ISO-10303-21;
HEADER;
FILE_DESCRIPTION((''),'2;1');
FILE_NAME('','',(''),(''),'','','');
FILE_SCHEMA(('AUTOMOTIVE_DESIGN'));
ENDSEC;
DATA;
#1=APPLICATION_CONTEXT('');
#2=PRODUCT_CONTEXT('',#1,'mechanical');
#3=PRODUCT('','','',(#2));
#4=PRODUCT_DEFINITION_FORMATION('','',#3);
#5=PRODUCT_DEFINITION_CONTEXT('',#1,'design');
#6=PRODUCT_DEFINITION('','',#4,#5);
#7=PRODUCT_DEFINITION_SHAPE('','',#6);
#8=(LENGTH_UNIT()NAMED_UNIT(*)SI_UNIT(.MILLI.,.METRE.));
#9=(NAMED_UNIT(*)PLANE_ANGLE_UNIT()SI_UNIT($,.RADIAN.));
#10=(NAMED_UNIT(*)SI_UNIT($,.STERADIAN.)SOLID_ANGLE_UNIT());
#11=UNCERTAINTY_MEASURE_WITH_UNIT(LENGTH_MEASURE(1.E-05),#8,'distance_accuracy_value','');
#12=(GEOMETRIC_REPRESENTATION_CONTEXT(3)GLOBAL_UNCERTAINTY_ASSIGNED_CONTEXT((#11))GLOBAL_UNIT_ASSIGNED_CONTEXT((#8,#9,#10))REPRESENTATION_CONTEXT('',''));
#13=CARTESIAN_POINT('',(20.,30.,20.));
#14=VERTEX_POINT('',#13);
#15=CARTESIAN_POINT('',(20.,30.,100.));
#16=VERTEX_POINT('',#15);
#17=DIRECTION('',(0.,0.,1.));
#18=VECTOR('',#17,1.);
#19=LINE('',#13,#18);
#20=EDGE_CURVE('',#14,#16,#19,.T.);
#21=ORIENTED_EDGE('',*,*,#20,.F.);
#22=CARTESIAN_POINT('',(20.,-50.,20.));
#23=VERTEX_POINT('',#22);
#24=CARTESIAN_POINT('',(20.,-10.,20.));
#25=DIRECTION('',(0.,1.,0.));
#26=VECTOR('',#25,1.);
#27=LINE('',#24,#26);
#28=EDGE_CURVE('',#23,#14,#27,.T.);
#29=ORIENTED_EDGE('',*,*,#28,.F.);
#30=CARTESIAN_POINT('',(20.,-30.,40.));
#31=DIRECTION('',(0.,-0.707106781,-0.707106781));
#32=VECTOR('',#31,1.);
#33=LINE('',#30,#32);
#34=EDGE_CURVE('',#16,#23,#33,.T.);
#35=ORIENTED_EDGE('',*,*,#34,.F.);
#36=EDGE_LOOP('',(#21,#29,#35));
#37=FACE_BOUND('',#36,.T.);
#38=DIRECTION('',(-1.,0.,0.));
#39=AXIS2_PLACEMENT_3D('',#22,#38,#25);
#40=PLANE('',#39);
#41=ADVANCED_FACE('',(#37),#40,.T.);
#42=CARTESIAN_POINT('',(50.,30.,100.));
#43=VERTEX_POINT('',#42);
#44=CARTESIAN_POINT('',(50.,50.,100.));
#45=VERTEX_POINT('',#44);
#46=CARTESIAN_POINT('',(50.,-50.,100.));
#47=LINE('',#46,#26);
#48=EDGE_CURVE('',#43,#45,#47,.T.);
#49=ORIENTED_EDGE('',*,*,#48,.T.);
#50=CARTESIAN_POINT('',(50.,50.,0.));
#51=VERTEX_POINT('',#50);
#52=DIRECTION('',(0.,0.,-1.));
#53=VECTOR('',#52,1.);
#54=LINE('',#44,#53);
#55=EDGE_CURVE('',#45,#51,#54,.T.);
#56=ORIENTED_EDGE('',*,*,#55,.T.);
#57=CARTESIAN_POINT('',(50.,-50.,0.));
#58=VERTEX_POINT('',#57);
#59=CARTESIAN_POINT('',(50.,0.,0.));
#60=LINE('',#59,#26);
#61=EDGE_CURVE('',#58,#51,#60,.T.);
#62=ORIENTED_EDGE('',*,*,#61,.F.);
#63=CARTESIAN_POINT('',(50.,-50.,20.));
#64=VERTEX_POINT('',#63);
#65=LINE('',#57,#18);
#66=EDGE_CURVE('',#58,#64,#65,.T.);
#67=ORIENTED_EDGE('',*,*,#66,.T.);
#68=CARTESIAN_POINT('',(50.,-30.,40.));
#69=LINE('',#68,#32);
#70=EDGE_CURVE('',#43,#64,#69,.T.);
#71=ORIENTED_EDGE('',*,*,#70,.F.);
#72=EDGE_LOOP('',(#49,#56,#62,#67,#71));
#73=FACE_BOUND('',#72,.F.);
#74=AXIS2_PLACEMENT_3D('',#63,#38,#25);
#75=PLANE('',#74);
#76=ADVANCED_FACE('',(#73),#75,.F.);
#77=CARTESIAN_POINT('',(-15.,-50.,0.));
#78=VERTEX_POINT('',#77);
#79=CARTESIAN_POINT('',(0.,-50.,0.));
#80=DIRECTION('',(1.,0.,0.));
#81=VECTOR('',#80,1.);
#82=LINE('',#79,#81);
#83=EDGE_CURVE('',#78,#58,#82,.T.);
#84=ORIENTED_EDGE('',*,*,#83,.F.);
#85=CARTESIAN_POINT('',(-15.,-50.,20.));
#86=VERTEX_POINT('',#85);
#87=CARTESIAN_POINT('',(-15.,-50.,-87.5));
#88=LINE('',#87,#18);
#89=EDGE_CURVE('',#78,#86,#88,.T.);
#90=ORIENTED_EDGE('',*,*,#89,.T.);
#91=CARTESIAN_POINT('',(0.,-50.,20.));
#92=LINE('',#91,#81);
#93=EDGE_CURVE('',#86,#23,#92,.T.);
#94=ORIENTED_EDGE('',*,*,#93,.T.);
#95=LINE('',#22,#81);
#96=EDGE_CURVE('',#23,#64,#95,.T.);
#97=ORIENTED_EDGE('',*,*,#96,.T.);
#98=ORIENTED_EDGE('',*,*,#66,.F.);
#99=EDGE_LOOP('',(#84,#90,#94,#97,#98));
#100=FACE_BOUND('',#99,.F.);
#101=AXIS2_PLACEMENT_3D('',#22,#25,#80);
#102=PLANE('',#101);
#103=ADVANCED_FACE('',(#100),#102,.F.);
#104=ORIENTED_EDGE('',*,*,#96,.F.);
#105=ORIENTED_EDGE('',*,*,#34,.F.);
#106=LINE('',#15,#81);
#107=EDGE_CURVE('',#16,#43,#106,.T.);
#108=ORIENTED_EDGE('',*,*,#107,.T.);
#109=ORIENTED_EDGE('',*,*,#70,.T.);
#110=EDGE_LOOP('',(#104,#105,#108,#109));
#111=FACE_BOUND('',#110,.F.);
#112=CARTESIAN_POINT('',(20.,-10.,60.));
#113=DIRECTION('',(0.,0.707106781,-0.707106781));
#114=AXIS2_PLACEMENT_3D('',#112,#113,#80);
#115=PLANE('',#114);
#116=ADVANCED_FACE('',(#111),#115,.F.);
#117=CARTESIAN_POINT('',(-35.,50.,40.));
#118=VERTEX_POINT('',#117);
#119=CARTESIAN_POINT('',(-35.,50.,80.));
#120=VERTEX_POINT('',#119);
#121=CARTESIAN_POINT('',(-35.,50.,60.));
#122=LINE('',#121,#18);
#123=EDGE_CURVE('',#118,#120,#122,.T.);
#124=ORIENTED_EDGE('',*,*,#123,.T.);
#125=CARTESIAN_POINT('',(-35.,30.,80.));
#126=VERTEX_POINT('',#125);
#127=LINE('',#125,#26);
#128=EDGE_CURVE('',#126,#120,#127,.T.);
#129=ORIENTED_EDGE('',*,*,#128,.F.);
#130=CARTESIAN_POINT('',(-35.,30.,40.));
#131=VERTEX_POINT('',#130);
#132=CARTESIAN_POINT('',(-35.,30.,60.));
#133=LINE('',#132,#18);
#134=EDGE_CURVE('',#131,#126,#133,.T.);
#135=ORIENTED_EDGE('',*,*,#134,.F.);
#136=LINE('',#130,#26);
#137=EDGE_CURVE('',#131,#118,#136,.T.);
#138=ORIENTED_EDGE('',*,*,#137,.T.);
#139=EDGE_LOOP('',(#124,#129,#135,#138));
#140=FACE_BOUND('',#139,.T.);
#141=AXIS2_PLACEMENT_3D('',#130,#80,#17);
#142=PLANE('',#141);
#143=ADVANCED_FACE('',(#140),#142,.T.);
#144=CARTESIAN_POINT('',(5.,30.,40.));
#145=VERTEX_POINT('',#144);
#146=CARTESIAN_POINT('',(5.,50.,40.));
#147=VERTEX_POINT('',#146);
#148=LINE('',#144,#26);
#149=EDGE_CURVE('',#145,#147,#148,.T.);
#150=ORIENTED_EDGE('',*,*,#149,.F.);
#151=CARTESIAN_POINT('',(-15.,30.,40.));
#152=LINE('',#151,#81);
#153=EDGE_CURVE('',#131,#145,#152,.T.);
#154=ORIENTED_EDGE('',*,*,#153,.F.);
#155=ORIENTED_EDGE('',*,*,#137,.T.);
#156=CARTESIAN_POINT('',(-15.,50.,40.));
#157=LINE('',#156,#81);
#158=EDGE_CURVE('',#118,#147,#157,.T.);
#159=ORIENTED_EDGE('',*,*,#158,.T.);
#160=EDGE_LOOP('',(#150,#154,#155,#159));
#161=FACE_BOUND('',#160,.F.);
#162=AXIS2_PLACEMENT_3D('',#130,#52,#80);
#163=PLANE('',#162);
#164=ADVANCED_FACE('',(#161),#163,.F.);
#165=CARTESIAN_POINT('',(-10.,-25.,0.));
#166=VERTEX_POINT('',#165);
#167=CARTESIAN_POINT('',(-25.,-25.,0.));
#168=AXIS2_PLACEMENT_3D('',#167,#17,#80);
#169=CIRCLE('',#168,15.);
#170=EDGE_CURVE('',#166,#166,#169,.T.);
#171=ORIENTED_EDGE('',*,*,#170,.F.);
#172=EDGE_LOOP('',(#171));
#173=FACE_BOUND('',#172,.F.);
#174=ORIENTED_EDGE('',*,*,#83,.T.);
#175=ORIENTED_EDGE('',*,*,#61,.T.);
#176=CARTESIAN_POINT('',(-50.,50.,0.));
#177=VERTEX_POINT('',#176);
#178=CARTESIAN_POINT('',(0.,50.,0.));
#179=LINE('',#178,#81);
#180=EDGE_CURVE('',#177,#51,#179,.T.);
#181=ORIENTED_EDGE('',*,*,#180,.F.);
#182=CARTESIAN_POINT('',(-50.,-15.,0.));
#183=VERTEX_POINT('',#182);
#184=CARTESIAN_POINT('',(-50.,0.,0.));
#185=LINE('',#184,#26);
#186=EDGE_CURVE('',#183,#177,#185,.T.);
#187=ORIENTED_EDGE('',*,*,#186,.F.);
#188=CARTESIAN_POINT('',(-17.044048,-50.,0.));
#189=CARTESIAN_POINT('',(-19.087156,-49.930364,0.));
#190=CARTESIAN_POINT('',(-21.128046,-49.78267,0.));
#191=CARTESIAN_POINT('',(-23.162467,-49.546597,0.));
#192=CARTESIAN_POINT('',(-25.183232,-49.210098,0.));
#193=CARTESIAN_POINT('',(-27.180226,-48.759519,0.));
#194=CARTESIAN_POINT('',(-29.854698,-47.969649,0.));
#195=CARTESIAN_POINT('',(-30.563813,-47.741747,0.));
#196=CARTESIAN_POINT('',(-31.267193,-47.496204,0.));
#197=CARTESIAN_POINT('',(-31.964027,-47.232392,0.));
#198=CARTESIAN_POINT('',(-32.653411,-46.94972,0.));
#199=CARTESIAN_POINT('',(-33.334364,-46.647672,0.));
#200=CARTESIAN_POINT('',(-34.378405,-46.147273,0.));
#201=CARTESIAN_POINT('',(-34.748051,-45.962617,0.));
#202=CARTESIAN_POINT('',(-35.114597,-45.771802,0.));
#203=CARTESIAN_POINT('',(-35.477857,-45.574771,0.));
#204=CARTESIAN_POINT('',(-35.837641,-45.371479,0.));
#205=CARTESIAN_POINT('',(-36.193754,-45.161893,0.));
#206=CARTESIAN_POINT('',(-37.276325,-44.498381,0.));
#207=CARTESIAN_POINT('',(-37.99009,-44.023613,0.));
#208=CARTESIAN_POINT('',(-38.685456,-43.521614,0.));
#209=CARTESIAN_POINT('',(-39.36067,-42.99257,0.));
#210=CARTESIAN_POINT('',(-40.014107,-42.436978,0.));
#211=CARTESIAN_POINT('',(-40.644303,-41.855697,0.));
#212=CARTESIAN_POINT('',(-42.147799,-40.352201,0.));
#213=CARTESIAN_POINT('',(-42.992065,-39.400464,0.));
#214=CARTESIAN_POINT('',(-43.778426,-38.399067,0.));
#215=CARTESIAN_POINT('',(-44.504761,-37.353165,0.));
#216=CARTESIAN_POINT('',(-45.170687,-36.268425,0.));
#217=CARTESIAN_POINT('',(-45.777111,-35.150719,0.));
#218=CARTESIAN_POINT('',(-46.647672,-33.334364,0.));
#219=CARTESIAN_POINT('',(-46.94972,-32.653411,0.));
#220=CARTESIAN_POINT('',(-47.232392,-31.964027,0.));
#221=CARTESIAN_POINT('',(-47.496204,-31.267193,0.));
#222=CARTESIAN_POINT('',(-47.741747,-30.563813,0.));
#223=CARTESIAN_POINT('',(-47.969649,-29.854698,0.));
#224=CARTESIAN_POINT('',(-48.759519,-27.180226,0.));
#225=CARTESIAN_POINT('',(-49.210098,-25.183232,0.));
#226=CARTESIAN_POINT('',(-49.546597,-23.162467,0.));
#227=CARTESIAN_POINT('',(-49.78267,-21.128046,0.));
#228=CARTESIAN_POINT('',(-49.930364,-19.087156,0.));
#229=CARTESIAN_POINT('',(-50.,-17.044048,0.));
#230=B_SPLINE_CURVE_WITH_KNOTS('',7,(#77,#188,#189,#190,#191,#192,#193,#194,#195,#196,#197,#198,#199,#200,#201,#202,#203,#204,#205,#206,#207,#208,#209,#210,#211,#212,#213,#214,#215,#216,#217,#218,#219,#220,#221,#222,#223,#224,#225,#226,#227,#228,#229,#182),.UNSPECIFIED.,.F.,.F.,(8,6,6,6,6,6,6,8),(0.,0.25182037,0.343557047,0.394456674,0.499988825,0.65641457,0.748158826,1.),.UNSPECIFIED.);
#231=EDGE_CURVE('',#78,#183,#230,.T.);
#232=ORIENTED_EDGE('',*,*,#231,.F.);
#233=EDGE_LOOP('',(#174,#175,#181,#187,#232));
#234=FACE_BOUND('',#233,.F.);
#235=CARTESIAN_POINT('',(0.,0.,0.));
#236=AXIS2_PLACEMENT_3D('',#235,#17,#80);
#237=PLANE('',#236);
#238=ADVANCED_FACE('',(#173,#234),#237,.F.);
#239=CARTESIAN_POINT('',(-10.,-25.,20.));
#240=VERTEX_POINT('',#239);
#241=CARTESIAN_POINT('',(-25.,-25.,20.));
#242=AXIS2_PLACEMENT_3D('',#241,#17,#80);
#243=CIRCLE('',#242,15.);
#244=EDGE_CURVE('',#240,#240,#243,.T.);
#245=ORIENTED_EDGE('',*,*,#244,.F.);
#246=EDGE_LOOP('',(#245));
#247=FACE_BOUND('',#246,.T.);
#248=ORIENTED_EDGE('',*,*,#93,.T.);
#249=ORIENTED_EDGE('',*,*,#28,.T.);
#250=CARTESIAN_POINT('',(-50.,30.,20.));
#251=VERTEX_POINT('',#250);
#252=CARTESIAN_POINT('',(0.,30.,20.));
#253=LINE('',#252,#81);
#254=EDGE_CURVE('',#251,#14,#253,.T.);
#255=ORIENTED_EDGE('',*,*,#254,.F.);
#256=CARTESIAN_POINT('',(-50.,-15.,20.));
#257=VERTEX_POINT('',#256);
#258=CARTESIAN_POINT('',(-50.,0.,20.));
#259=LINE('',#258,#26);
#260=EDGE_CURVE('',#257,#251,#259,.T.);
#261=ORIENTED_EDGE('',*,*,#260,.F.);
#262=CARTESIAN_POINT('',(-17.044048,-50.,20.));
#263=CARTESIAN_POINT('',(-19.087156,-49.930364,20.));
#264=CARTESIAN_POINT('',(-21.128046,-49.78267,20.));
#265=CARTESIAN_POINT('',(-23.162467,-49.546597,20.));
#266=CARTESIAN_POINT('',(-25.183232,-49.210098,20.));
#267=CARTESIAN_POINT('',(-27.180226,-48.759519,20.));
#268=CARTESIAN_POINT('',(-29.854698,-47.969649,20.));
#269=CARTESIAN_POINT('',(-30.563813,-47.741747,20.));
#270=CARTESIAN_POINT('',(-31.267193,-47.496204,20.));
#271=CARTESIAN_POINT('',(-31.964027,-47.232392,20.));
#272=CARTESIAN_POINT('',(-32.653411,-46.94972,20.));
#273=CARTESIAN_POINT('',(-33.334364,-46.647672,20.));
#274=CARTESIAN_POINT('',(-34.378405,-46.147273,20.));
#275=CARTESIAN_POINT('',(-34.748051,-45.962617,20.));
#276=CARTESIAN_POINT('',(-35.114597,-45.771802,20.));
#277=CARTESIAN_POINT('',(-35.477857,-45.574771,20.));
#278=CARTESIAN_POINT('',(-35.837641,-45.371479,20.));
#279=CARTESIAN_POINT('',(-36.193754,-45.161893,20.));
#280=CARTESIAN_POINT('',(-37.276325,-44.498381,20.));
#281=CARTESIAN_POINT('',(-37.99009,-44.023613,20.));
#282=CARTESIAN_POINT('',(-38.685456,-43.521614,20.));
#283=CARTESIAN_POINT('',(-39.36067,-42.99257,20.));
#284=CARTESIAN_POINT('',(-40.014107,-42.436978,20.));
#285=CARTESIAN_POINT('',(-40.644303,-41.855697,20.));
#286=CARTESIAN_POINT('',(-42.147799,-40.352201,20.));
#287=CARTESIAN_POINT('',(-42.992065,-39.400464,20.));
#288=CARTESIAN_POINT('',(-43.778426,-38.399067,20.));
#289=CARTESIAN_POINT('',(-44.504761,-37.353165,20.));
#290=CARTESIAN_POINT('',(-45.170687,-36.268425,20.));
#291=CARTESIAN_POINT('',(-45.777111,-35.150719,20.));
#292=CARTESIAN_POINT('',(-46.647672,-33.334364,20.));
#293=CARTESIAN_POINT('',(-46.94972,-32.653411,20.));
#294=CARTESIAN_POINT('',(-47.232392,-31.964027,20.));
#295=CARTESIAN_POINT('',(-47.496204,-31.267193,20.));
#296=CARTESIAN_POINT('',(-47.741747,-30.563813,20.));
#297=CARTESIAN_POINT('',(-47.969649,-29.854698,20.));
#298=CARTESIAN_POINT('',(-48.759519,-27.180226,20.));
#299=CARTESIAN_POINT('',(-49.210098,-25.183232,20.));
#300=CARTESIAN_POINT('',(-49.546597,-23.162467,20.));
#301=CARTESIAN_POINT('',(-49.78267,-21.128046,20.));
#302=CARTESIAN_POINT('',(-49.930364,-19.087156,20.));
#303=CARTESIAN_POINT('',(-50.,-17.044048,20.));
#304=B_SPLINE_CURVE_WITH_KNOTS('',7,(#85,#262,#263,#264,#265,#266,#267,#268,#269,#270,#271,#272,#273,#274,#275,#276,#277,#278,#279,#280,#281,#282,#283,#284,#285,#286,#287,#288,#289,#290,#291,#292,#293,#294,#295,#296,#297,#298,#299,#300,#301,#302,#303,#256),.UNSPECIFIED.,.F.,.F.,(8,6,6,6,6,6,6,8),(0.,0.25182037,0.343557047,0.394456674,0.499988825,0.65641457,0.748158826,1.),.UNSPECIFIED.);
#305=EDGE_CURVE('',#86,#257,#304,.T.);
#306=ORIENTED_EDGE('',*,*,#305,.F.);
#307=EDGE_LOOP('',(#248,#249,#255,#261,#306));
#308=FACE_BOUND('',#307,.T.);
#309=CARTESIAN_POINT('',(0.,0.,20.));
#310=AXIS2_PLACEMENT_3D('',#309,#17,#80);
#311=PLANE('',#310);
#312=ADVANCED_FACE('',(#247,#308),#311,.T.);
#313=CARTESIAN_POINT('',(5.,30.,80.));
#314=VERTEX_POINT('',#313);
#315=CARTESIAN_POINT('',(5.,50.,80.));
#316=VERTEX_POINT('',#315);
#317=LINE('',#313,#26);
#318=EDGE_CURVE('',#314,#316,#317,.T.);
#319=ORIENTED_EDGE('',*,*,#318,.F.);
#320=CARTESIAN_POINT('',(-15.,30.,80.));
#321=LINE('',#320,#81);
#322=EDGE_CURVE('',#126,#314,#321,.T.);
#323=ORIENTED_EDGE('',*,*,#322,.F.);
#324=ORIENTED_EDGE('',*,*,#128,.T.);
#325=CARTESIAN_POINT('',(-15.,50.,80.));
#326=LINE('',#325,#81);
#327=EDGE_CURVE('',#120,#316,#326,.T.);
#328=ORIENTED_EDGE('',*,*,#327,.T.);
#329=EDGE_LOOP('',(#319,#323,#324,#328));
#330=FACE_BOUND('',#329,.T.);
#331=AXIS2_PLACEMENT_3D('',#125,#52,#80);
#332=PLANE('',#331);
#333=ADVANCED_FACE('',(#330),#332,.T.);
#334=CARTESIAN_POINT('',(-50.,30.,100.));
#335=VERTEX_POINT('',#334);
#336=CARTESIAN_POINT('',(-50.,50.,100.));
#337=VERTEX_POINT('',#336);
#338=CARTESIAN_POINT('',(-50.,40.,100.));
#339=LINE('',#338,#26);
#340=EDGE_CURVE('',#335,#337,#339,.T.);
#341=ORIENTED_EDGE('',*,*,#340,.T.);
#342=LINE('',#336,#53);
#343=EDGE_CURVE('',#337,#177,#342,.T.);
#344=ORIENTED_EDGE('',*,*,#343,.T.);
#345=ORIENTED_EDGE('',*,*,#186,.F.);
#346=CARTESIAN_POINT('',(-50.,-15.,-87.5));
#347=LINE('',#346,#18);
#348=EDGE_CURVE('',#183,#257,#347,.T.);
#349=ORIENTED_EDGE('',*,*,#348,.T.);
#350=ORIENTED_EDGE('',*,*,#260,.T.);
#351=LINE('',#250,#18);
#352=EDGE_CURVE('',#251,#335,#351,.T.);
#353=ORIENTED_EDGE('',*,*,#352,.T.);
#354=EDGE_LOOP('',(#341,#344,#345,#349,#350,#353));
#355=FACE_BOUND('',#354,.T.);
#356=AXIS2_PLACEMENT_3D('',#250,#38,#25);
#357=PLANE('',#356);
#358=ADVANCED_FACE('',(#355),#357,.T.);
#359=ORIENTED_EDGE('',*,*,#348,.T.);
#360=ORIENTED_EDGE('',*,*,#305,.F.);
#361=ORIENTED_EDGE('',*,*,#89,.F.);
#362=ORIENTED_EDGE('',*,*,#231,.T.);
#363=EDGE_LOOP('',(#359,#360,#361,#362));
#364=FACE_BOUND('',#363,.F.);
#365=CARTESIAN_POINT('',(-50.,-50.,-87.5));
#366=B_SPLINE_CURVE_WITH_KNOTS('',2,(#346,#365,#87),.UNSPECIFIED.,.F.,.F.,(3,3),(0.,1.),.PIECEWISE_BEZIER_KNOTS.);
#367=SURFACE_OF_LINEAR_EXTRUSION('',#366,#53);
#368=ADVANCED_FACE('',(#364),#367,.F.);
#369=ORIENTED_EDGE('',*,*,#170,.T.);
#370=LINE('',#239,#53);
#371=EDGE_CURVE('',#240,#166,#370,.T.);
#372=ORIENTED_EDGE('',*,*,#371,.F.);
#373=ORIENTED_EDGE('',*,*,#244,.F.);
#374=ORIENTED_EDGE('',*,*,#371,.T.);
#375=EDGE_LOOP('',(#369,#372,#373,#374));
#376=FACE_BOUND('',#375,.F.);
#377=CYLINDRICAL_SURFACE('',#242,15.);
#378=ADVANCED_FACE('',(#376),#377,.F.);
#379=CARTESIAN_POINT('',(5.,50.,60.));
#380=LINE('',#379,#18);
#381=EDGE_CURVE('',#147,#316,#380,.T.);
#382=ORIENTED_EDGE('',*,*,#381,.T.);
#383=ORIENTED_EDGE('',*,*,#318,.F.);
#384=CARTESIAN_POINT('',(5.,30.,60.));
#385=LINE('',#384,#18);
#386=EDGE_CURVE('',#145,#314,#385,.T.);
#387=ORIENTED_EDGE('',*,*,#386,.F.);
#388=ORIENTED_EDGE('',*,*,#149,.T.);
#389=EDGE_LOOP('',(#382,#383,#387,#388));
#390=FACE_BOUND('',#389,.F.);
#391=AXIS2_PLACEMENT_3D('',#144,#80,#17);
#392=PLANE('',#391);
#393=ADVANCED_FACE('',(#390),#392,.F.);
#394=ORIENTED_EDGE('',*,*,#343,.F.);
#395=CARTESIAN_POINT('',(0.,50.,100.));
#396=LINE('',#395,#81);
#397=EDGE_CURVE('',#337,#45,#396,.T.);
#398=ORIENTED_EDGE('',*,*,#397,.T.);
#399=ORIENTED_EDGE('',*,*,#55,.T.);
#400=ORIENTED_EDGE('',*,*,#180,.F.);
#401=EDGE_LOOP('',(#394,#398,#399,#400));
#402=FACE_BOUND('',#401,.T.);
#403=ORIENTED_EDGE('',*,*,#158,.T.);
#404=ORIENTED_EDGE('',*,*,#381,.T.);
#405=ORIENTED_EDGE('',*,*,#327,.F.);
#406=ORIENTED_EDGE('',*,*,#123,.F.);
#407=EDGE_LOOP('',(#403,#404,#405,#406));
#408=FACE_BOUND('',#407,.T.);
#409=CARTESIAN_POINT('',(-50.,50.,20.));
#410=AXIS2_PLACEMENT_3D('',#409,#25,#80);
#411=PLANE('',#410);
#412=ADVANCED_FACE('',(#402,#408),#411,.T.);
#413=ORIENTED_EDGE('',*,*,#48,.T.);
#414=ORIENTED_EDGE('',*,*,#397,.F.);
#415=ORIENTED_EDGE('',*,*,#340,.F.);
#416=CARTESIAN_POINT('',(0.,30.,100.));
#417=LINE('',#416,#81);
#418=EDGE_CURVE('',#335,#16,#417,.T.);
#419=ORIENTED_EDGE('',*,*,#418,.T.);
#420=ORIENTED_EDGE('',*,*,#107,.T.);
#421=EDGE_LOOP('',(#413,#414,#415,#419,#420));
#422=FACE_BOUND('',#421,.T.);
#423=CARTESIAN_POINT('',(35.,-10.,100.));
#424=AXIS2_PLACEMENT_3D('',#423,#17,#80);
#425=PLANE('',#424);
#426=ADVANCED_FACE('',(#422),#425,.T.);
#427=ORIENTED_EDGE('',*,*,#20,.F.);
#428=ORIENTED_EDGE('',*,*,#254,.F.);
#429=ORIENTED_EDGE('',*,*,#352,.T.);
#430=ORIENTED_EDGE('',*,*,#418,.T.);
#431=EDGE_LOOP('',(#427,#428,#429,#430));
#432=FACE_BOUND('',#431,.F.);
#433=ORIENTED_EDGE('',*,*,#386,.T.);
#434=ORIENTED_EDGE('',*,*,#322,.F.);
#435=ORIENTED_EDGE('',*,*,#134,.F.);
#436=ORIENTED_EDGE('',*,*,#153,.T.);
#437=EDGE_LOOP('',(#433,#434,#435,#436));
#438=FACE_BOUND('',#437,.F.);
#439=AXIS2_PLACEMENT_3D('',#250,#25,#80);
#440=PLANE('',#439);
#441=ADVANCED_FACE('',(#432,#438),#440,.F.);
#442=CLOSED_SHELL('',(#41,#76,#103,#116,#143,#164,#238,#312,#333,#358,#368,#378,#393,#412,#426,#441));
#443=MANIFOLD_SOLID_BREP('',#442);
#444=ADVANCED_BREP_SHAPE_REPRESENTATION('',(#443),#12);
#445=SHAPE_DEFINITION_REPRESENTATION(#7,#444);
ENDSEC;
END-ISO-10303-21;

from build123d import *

# Parameters (mm, degrees)
F0_W        = 100
F0_H        = 100
F1_DEPTH    = 20
F2_W        = 100
F2_H        = 20
F3_DEPTH    = 80
F4_R        = 15
F5_DEPTH    = 20
F6_T1_DEPTH = 195
F7_W        = 30
F7_H        = 80
F8_DEPTH    = 80
F9_SIZE     = 80
F10_W       = 40
F10_H       = 40
F11_DEPTH   = 20


# Not quite as in the source:
# - a fillet or chamfer that OpenCascade refuses, or shapes differently, is made with other operations: its cross-section is extruded or revolved along the edge and cut away or added


with BuildPart() as f1:
    # F0 (on Top) → F1 (new body)
    with BuildSketch(Plane.XY):
        Rectangle(F0_W, F0_H)
    extrude(amount=F1_DEPTH)

    # F2 (on face) → F3 (join)
    with BuildSketch(Plane.XY.offset(20)):
        with Locations((0, 40)):
            Rectangle(F2_W, F2_H)
    extrude(amount=F3_DEPTH)

    # F4 (on face) → F5 (cut)
    with BuildSketch(Plane.XY.offset(20)):
        with Locations((-25, -25)):
            Circle(F4_R)
    extrude(amount=-F5_DEPTH, mode=Mode.SUBTRACT)

    # F6: fillet of radius 35 on 1 edges, made by hand

    # F6_s2 → F6_t1 (cut)
    with BuildSketch(Plane.XY.offset(-87.5)):
        with BuildLine():
            add(Edge.make_bspline(
                [(-50, -15), (-50, -50), (-15, -50)],
                knots=[0, 0, 0, 1, 1, 1], degree=2, weights=[1, 1, 1]))
            Line((-15, -50), (-50, -50))
            Line((-50, -50), (-50, -15))
        make_face()
    extrude(amount=F6_T1_DEPTH, mode=Mode.SUBTRACT)

    # F7 (on face) → F8 (join)
    with BuildSketch(Plane.XY.offset(20)):
        with Locations((35, -10)):
            Rectangle(F7_W, F7_H)
    extrude(amount=F8_DEPTH)

    # F9
    f9_edges = [f1.edges().sort_by_distance(p)[0] for p in [
        (35, -50, 100),
    ]]
    chamfer(f9_edges, length=F9_SIZE)

    # F10 (on face) → F11 (cut)
    with BuildSketch(Plane.XZ.offset(-30)):
        with Locations((-15, 60)):
            Rectangle(F10_W, F10_H)
    extrude(amount=-F11_DEPTH, mode=Mode.SUBTRACT)


solid = f1.part
